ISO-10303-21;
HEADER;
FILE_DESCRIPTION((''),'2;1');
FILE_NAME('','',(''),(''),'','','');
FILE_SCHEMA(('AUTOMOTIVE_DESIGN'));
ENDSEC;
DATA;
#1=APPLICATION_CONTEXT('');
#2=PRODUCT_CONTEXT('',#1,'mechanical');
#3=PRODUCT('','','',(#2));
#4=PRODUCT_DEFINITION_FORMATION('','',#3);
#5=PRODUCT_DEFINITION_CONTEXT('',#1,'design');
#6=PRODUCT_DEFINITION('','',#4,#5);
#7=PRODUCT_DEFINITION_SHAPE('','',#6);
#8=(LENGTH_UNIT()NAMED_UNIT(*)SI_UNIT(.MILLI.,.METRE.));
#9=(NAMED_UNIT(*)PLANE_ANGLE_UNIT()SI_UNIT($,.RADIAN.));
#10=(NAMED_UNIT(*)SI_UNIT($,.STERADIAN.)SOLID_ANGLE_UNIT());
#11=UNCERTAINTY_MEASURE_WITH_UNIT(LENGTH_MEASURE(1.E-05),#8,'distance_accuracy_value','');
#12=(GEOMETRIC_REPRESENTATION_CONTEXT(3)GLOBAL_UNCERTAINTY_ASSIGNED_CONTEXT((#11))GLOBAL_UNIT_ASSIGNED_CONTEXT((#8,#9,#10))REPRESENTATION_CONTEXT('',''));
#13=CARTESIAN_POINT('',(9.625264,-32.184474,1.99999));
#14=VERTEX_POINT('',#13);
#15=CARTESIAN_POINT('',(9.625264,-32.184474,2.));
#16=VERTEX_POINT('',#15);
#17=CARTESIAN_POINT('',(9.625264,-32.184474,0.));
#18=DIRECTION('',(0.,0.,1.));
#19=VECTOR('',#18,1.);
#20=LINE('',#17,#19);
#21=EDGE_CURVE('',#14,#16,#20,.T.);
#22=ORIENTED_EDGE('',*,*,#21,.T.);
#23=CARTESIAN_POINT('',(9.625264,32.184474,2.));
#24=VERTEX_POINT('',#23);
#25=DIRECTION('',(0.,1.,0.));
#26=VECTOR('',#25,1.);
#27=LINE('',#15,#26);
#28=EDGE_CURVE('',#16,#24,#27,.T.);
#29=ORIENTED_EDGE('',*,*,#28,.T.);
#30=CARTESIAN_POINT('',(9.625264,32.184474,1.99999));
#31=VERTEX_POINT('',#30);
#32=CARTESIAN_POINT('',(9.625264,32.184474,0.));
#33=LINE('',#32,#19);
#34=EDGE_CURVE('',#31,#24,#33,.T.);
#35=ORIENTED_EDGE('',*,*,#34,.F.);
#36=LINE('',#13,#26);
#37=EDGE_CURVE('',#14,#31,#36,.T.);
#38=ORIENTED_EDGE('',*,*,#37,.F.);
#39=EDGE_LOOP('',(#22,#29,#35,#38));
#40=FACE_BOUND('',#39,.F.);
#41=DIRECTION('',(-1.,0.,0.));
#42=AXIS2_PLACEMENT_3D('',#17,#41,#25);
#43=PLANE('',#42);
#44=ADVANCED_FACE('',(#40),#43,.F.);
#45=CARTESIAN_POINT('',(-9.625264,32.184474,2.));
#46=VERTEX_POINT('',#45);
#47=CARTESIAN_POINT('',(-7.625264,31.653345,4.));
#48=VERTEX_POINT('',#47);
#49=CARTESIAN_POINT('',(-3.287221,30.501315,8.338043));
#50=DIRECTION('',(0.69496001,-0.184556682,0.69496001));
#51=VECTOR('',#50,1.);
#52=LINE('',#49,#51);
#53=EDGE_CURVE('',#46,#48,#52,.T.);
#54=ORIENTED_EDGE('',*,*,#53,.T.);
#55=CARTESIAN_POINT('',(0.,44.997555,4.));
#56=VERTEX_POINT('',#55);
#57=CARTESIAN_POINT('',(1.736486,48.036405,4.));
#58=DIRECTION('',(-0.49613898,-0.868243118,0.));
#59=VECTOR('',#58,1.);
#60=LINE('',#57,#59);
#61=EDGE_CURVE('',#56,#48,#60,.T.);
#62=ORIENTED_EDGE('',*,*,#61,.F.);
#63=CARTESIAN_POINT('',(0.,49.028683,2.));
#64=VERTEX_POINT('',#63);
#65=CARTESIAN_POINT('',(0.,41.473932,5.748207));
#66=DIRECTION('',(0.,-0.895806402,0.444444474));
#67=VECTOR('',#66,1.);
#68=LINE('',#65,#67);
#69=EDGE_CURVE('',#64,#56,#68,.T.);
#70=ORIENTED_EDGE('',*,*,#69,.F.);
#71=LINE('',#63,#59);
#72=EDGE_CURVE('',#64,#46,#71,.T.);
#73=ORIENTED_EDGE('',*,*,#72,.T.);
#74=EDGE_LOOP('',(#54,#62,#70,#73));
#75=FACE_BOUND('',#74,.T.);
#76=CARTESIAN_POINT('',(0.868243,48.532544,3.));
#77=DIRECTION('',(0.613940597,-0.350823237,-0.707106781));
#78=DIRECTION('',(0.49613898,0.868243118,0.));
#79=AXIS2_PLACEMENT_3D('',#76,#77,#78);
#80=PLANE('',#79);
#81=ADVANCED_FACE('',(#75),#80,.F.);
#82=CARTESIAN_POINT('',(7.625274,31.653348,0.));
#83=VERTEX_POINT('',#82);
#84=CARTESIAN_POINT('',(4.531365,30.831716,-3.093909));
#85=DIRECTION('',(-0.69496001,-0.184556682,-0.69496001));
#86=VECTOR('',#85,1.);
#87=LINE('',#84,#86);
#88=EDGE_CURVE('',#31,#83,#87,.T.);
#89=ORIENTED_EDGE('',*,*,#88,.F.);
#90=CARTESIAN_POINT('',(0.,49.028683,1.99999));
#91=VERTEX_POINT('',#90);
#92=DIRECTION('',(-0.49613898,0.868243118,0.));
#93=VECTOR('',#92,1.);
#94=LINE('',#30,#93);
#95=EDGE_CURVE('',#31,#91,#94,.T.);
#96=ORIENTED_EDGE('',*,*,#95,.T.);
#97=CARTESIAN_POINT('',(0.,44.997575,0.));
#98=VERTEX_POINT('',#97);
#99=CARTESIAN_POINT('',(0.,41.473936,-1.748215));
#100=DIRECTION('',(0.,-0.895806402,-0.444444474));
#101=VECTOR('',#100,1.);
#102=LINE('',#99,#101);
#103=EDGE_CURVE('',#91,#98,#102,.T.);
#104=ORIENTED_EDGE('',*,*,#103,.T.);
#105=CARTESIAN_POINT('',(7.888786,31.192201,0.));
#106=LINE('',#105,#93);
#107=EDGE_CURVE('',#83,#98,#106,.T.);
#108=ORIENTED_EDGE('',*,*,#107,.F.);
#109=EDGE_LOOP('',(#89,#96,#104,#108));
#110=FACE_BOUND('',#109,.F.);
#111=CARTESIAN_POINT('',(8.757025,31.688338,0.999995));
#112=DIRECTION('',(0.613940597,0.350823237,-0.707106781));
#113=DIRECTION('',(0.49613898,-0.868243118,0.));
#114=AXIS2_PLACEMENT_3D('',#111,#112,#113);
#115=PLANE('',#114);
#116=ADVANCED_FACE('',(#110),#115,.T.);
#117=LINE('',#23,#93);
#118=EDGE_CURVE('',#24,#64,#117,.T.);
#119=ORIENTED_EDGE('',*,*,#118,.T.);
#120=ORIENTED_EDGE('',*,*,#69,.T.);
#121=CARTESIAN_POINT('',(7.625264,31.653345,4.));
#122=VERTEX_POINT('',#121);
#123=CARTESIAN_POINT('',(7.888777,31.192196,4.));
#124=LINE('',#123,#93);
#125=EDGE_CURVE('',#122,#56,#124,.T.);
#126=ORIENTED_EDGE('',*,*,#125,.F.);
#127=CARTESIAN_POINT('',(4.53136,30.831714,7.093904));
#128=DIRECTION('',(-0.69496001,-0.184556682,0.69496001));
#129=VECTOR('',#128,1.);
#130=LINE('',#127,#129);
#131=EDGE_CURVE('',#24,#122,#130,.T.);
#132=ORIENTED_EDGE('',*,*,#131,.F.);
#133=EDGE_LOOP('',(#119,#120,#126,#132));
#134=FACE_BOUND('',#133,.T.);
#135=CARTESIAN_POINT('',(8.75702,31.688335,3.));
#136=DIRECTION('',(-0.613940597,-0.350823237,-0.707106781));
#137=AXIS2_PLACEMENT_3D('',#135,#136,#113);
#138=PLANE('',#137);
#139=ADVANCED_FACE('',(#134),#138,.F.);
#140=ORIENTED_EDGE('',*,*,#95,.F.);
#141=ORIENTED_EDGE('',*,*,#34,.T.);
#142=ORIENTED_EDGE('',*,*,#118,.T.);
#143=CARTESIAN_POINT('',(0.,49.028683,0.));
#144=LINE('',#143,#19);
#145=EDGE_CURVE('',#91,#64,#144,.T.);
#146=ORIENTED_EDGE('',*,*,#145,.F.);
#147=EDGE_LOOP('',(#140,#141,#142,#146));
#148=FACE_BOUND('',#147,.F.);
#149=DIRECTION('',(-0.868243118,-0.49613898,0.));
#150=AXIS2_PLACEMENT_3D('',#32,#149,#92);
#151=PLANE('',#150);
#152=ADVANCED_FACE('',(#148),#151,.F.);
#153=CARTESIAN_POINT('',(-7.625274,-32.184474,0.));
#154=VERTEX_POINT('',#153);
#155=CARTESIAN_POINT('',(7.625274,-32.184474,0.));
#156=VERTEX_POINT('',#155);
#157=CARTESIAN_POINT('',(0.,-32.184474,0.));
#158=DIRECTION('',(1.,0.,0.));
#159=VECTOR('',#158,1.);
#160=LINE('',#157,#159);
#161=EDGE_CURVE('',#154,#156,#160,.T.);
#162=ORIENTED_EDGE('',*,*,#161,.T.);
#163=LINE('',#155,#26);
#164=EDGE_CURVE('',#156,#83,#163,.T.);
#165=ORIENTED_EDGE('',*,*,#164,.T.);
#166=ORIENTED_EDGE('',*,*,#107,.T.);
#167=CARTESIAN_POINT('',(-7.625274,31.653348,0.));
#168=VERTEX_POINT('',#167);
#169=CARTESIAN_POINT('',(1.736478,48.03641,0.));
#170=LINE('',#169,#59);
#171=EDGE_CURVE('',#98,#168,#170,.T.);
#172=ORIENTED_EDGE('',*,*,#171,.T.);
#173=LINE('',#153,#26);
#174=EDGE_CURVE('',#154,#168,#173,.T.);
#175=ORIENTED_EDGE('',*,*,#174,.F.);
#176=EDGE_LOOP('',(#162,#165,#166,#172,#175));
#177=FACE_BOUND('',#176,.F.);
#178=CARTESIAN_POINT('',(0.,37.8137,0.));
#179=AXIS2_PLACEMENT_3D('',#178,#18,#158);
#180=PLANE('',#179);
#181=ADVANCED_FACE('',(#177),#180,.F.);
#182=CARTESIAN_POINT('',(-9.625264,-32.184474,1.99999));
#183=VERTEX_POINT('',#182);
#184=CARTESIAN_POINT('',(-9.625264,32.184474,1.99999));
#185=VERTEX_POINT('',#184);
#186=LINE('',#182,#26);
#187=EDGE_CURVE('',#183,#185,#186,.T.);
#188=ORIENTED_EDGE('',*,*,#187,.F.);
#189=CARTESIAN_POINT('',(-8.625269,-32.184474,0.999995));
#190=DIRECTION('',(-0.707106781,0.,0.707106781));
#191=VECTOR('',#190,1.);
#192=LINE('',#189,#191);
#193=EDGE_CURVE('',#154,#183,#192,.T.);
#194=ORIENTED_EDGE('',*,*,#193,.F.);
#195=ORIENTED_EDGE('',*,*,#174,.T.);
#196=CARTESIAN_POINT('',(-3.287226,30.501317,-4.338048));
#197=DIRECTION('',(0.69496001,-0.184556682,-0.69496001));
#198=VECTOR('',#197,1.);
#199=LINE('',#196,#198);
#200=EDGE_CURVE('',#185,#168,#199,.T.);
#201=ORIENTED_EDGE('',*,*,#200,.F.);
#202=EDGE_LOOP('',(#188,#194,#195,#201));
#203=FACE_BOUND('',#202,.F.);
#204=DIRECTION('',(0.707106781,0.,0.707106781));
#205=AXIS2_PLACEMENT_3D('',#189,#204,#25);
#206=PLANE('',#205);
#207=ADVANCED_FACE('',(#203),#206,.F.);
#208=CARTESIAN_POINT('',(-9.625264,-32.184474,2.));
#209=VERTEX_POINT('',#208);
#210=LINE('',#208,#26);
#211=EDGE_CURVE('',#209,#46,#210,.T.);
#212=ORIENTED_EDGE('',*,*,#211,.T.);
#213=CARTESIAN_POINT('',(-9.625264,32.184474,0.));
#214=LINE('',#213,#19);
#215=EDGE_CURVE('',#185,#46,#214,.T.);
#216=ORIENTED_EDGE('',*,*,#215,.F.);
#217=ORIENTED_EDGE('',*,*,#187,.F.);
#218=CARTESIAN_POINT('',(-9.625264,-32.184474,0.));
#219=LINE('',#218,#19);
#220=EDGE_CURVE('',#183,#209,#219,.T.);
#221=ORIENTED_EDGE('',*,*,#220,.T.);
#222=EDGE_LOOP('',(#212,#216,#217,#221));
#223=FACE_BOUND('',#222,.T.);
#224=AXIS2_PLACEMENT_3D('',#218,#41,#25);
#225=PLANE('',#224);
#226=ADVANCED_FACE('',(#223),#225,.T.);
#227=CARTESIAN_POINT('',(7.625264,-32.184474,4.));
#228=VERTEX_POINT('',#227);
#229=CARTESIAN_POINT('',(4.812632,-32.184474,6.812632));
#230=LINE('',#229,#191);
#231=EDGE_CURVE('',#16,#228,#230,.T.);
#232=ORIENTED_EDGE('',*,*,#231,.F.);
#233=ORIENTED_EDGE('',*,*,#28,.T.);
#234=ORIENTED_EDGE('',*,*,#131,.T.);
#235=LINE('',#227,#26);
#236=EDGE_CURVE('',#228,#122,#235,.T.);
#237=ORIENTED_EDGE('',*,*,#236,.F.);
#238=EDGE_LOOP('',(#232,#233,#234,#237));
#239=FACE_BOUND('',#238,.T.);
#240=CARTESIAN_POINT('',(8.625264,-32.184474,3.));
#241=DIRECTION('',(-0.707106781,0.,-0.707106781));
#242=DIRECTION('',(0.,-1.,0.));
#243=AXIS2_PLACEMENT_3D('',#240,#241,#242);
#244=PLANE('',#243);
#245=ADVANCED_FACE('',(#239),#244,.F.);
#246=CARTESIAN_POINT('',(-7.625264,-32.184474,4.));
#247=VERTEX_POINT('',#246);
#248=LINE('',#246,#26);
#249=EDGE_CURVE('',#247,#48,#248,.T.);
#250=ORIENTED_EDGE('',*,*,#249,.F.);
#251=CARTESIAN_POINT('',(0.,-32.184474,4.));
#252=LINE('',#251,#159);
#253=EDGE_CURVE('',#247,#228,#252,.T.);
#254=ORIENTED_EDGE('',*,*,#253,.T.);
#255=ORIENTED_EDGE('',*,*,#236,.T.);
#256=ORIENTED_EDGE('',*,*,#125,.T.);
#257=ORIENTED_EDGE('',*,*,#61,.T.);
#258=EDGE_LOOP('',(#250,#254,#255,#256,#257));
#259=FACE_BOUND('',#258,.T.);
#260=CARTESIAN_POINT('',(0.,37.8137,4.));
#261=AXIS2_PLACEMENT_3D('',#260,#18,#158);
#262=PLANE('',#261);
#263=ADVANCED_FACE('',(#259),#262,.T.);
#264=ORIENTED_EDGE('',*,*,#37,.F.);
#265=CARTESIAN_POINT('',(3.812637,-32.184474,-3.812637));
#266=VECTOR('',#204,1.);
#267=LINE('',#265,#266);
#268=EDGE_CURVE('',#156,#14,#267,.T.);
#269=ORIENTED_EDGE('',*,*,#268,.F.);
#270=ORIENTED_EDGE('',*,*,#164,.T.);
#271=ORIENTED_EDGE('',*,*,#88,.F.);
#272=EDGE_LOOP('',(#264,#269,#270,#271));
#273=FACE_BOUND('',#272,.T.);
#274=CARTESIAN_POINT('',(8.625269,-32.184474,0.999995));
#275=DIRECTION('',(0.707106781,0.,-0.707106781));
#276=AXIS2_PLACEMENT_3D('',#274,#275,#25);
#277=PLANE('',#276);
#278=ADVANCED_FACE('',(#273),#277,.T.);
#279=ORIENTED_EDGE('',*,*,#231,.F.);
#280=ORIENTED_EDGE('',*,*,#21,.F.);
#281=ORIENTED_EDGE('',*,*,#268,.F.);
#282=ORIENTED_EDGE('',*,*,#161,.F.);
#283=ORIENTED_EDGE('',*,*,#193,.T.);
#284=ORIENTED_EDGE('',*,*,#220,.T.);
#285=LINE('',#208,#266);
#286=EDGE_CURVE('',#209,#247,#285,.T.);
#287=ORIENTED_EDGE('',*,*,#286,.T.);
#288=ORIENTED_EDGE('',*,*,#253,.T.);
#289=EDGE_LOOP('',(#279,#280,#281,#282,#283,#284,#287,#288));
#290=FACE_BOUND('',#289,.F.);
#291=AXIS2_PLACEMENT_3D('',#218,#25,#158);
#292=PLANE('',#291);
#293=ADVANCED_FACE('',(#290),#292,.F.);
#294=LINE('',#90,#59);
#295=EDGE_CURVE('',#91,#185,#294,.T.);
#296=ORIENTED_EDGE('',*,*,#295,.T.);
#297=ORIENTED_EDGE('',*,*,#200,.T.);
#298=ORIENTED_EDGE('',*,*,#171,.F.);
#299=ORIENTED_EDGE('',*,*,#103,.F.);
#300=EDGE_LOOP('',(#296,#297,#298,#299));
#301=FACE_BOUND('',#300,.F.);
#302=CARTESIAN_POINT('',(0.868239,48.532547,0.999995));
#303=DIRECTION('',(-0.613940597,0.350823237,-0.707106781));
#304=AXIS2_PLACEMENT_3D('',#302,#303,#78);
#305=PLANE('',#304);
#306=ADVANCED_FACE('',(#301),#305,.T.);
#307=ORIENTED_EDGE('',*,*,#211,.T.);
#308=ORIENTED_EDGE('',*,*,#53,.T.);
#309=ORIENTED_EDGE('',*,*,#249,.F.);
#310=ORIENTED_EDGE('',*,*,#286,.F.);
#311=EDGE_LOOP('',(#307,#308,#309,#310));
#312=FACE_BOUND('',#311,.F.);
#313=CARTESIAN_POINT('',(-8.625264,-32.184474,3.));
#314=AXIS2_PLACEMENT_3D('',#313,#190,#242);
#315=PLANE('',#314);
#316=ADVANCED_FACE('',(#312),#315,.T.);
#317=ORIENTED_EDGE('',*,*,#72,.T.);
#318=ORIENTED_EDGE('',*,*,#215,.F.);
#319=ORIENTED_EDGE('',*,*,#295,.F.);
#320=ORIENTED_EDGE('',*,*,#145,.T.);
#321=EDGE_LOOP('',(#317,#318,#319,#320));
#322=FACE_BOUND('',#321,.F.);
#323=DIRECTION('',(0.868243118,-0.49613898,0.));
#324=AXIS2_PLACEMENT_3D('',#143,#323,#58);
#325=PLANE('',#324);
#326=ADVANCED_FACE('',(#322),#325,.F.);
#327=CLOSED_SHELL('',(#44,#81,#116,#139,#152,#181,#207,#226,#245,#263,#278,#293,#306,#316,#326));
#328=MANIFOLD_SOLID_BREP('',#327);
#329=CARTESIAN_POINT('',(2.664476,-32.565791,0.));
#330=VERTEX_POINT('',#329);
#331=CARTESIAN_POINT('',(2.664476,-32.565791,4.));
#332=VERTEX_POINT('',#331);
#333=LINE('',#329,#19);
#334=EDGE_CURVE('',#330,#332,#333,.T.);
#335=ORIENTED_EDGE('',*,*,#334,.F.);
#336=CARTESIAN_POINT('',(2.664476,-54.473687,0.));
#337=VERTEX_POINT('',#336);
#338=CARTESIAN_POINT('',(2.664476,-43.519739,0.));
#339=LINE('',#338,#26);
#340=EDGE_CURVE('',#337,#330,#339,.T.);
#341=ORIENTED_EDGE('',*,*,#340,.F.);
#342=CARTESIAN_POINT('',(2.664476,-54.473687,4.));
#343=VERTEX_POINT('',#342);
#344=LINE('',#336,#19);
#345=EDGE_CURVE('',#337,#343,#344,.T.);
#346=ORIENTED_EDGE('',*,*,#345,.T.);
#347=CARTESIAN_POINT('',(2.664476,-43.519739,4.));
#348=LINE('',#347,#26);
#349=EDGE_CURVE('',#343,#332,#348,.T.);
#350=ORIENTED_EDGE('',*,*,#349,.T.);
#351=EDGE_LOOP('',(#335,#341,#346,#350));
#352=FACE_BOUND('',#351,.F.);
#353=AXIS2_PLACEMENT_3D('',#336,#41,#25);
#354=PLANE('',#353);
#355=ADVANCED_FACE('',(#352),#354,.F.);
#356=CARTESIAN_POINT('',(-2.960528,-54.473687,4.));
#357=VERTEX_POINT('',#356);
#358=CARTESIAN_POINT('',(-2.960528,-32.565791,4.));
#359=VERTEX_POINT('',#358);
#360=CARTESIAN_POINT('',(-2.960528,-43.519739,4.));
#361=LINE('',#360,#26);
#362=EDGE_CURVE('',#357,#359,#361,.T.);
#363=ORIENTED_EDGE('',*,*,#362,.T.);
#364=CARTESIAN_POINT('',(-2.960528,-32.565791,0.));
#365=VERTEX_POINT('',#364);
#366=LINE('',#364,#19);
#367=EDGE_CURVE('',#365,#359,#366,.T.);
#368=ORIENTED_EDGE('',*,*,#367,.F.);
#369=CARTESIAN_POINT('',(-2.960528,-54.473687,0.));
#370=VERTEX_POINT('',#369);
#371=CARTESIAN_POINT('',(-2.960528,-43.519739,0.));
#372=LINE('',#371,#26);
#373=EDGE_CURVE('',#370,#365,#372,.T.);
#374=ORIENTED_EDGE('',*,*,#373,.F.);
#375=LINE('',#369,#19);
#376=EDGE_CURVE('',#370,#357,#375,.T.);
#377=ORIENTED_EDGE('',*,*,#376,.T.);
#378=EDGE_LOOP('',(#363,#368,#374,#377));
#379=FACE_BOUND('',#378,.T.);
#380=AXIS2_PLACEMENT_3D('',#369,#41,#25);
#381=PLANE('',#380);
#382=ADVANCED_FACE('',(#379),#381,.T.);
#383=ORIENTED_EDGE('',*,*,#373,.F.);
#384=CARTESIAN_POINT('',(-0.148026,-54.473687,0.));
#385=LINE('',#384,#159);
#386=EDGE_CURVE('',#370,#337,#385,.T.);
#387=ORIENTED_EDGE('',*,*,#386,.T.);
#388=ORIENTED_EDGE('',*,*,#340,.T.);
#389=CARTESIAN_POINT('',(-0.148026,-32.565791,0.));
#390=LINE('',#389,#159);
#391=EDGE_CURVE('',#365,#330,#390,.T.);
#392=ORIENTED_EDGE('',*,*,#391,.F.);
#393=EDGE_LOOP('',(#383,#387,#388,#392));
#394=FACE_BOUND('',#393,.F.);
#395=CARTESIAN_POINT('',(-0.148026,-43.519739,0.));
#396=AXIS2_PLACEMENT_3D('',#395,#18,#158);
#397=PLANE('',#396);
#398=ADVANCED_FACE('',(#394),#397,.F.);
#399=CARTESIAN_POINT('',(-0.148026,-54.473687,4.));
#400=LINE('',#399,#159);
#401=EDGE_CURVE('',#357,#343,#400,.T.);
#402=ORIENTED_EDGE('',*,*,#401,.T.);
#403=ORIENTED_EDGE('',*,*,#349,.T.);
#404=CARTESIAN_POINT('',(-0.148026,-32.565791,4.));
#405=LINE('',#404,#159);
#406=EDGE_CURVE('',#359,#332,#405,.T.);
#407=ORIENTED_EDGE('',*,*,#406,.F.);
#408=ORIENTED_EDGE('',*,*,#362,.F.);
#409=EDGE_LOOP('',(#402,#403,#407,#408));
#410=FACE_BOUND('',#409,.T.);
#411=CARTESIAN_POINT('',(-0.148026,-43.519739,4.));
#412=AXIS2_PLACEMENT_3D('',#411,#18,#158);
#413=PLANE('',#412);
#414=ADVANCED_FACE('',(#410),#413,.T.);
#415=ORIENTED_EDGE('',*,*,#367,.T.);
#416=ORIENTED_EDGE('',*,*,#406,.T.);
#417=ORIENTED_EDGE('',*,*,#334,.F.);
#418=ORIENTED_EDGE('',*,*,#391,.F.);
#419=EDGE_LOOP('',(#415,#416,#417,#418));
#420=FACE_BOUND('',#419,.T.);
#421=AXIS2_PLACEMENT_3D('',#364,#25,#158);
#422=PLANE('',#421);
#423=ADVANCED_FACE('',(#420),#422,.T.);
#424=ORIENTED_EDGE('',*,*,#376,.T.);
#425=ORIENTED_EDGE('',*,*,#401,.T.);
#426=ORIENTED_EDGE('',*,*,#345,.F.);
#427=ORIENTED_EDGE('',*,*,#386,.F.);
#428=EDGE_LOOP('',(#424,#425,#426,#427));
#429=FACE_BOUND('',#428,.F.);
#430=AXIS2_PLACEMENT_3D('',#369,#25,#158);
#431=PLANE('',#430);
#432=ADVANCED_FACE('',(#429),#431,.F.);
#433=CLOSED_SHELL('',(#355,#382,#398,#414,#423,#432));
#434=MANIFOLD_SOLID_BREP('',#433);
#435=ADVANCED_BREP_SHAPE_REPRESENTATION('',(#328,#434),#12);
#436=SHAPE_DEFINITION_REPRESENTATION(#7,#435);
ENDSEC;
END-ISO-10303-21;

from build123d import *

# Parameters (mm, degrees)
F0_W     = 19.2505270243
F0_H     = 64.3689483404
F1_DEPTH = 4
F2_SIZE  = 2
F3_SIZE  = 1.99999
F4_W     = 5.6250048801
F4_H     = 21.9078958035
F5_DEPTH = 4


# Not quite as in the source:
# - a fillet or chamfer is up to 0.001 mm smaller than in the source, because OpenCascade refuses the exact size


with BuildPart() as f1:
    # F0 (on Top) → F1 (new body)
    with BuildSketch(Plane.XY):
        Polygon((0, 49.0286834538), (-9.6252635121, 32.1844741702), (9.6252635121, 32.1844741702), align=None)
        Rectangle(F0_W, F0_H)
    extrude(amount=F1_DEPTH)

    # F2
    f2_edges = [f1.edges().sort_by_distance(p)[0] for p in [
        (9.625264, 0, 4),
        (4.812632, 40.606579, 4),
        (-4.812632, 40.606579, 4),
        (-9.625264, 0, 4),
    ]]
    chamfer(f2_edges, length=F2_SIZE)

    # F3 (size 2 in the source; OpenCascade refuses exactly that, so slightly less here)
    f3_edges = [f1.edges().sort_by_distance(p)[0] for p in [
        (4.812632, 40.606579, 0),
        (-4.812632, 40.606579, 0),
        (-9.625264, 0, 0),
        (9.625264, 0, 0),
    ]]
    chamfer(f3_edges, length=F3_SIZE)


with BuildPart() as f5:
    # F4 (on Top) → F5 (new body)
    with BuildSketch(Plane.XY):
        with Locations((-0.1480260398, -43.5197390616)):
            Rectangle(F4_W, F4_H)
    extrude(amount=F5_DEPTH)


solid = Compound([f1.part, f5.part])
